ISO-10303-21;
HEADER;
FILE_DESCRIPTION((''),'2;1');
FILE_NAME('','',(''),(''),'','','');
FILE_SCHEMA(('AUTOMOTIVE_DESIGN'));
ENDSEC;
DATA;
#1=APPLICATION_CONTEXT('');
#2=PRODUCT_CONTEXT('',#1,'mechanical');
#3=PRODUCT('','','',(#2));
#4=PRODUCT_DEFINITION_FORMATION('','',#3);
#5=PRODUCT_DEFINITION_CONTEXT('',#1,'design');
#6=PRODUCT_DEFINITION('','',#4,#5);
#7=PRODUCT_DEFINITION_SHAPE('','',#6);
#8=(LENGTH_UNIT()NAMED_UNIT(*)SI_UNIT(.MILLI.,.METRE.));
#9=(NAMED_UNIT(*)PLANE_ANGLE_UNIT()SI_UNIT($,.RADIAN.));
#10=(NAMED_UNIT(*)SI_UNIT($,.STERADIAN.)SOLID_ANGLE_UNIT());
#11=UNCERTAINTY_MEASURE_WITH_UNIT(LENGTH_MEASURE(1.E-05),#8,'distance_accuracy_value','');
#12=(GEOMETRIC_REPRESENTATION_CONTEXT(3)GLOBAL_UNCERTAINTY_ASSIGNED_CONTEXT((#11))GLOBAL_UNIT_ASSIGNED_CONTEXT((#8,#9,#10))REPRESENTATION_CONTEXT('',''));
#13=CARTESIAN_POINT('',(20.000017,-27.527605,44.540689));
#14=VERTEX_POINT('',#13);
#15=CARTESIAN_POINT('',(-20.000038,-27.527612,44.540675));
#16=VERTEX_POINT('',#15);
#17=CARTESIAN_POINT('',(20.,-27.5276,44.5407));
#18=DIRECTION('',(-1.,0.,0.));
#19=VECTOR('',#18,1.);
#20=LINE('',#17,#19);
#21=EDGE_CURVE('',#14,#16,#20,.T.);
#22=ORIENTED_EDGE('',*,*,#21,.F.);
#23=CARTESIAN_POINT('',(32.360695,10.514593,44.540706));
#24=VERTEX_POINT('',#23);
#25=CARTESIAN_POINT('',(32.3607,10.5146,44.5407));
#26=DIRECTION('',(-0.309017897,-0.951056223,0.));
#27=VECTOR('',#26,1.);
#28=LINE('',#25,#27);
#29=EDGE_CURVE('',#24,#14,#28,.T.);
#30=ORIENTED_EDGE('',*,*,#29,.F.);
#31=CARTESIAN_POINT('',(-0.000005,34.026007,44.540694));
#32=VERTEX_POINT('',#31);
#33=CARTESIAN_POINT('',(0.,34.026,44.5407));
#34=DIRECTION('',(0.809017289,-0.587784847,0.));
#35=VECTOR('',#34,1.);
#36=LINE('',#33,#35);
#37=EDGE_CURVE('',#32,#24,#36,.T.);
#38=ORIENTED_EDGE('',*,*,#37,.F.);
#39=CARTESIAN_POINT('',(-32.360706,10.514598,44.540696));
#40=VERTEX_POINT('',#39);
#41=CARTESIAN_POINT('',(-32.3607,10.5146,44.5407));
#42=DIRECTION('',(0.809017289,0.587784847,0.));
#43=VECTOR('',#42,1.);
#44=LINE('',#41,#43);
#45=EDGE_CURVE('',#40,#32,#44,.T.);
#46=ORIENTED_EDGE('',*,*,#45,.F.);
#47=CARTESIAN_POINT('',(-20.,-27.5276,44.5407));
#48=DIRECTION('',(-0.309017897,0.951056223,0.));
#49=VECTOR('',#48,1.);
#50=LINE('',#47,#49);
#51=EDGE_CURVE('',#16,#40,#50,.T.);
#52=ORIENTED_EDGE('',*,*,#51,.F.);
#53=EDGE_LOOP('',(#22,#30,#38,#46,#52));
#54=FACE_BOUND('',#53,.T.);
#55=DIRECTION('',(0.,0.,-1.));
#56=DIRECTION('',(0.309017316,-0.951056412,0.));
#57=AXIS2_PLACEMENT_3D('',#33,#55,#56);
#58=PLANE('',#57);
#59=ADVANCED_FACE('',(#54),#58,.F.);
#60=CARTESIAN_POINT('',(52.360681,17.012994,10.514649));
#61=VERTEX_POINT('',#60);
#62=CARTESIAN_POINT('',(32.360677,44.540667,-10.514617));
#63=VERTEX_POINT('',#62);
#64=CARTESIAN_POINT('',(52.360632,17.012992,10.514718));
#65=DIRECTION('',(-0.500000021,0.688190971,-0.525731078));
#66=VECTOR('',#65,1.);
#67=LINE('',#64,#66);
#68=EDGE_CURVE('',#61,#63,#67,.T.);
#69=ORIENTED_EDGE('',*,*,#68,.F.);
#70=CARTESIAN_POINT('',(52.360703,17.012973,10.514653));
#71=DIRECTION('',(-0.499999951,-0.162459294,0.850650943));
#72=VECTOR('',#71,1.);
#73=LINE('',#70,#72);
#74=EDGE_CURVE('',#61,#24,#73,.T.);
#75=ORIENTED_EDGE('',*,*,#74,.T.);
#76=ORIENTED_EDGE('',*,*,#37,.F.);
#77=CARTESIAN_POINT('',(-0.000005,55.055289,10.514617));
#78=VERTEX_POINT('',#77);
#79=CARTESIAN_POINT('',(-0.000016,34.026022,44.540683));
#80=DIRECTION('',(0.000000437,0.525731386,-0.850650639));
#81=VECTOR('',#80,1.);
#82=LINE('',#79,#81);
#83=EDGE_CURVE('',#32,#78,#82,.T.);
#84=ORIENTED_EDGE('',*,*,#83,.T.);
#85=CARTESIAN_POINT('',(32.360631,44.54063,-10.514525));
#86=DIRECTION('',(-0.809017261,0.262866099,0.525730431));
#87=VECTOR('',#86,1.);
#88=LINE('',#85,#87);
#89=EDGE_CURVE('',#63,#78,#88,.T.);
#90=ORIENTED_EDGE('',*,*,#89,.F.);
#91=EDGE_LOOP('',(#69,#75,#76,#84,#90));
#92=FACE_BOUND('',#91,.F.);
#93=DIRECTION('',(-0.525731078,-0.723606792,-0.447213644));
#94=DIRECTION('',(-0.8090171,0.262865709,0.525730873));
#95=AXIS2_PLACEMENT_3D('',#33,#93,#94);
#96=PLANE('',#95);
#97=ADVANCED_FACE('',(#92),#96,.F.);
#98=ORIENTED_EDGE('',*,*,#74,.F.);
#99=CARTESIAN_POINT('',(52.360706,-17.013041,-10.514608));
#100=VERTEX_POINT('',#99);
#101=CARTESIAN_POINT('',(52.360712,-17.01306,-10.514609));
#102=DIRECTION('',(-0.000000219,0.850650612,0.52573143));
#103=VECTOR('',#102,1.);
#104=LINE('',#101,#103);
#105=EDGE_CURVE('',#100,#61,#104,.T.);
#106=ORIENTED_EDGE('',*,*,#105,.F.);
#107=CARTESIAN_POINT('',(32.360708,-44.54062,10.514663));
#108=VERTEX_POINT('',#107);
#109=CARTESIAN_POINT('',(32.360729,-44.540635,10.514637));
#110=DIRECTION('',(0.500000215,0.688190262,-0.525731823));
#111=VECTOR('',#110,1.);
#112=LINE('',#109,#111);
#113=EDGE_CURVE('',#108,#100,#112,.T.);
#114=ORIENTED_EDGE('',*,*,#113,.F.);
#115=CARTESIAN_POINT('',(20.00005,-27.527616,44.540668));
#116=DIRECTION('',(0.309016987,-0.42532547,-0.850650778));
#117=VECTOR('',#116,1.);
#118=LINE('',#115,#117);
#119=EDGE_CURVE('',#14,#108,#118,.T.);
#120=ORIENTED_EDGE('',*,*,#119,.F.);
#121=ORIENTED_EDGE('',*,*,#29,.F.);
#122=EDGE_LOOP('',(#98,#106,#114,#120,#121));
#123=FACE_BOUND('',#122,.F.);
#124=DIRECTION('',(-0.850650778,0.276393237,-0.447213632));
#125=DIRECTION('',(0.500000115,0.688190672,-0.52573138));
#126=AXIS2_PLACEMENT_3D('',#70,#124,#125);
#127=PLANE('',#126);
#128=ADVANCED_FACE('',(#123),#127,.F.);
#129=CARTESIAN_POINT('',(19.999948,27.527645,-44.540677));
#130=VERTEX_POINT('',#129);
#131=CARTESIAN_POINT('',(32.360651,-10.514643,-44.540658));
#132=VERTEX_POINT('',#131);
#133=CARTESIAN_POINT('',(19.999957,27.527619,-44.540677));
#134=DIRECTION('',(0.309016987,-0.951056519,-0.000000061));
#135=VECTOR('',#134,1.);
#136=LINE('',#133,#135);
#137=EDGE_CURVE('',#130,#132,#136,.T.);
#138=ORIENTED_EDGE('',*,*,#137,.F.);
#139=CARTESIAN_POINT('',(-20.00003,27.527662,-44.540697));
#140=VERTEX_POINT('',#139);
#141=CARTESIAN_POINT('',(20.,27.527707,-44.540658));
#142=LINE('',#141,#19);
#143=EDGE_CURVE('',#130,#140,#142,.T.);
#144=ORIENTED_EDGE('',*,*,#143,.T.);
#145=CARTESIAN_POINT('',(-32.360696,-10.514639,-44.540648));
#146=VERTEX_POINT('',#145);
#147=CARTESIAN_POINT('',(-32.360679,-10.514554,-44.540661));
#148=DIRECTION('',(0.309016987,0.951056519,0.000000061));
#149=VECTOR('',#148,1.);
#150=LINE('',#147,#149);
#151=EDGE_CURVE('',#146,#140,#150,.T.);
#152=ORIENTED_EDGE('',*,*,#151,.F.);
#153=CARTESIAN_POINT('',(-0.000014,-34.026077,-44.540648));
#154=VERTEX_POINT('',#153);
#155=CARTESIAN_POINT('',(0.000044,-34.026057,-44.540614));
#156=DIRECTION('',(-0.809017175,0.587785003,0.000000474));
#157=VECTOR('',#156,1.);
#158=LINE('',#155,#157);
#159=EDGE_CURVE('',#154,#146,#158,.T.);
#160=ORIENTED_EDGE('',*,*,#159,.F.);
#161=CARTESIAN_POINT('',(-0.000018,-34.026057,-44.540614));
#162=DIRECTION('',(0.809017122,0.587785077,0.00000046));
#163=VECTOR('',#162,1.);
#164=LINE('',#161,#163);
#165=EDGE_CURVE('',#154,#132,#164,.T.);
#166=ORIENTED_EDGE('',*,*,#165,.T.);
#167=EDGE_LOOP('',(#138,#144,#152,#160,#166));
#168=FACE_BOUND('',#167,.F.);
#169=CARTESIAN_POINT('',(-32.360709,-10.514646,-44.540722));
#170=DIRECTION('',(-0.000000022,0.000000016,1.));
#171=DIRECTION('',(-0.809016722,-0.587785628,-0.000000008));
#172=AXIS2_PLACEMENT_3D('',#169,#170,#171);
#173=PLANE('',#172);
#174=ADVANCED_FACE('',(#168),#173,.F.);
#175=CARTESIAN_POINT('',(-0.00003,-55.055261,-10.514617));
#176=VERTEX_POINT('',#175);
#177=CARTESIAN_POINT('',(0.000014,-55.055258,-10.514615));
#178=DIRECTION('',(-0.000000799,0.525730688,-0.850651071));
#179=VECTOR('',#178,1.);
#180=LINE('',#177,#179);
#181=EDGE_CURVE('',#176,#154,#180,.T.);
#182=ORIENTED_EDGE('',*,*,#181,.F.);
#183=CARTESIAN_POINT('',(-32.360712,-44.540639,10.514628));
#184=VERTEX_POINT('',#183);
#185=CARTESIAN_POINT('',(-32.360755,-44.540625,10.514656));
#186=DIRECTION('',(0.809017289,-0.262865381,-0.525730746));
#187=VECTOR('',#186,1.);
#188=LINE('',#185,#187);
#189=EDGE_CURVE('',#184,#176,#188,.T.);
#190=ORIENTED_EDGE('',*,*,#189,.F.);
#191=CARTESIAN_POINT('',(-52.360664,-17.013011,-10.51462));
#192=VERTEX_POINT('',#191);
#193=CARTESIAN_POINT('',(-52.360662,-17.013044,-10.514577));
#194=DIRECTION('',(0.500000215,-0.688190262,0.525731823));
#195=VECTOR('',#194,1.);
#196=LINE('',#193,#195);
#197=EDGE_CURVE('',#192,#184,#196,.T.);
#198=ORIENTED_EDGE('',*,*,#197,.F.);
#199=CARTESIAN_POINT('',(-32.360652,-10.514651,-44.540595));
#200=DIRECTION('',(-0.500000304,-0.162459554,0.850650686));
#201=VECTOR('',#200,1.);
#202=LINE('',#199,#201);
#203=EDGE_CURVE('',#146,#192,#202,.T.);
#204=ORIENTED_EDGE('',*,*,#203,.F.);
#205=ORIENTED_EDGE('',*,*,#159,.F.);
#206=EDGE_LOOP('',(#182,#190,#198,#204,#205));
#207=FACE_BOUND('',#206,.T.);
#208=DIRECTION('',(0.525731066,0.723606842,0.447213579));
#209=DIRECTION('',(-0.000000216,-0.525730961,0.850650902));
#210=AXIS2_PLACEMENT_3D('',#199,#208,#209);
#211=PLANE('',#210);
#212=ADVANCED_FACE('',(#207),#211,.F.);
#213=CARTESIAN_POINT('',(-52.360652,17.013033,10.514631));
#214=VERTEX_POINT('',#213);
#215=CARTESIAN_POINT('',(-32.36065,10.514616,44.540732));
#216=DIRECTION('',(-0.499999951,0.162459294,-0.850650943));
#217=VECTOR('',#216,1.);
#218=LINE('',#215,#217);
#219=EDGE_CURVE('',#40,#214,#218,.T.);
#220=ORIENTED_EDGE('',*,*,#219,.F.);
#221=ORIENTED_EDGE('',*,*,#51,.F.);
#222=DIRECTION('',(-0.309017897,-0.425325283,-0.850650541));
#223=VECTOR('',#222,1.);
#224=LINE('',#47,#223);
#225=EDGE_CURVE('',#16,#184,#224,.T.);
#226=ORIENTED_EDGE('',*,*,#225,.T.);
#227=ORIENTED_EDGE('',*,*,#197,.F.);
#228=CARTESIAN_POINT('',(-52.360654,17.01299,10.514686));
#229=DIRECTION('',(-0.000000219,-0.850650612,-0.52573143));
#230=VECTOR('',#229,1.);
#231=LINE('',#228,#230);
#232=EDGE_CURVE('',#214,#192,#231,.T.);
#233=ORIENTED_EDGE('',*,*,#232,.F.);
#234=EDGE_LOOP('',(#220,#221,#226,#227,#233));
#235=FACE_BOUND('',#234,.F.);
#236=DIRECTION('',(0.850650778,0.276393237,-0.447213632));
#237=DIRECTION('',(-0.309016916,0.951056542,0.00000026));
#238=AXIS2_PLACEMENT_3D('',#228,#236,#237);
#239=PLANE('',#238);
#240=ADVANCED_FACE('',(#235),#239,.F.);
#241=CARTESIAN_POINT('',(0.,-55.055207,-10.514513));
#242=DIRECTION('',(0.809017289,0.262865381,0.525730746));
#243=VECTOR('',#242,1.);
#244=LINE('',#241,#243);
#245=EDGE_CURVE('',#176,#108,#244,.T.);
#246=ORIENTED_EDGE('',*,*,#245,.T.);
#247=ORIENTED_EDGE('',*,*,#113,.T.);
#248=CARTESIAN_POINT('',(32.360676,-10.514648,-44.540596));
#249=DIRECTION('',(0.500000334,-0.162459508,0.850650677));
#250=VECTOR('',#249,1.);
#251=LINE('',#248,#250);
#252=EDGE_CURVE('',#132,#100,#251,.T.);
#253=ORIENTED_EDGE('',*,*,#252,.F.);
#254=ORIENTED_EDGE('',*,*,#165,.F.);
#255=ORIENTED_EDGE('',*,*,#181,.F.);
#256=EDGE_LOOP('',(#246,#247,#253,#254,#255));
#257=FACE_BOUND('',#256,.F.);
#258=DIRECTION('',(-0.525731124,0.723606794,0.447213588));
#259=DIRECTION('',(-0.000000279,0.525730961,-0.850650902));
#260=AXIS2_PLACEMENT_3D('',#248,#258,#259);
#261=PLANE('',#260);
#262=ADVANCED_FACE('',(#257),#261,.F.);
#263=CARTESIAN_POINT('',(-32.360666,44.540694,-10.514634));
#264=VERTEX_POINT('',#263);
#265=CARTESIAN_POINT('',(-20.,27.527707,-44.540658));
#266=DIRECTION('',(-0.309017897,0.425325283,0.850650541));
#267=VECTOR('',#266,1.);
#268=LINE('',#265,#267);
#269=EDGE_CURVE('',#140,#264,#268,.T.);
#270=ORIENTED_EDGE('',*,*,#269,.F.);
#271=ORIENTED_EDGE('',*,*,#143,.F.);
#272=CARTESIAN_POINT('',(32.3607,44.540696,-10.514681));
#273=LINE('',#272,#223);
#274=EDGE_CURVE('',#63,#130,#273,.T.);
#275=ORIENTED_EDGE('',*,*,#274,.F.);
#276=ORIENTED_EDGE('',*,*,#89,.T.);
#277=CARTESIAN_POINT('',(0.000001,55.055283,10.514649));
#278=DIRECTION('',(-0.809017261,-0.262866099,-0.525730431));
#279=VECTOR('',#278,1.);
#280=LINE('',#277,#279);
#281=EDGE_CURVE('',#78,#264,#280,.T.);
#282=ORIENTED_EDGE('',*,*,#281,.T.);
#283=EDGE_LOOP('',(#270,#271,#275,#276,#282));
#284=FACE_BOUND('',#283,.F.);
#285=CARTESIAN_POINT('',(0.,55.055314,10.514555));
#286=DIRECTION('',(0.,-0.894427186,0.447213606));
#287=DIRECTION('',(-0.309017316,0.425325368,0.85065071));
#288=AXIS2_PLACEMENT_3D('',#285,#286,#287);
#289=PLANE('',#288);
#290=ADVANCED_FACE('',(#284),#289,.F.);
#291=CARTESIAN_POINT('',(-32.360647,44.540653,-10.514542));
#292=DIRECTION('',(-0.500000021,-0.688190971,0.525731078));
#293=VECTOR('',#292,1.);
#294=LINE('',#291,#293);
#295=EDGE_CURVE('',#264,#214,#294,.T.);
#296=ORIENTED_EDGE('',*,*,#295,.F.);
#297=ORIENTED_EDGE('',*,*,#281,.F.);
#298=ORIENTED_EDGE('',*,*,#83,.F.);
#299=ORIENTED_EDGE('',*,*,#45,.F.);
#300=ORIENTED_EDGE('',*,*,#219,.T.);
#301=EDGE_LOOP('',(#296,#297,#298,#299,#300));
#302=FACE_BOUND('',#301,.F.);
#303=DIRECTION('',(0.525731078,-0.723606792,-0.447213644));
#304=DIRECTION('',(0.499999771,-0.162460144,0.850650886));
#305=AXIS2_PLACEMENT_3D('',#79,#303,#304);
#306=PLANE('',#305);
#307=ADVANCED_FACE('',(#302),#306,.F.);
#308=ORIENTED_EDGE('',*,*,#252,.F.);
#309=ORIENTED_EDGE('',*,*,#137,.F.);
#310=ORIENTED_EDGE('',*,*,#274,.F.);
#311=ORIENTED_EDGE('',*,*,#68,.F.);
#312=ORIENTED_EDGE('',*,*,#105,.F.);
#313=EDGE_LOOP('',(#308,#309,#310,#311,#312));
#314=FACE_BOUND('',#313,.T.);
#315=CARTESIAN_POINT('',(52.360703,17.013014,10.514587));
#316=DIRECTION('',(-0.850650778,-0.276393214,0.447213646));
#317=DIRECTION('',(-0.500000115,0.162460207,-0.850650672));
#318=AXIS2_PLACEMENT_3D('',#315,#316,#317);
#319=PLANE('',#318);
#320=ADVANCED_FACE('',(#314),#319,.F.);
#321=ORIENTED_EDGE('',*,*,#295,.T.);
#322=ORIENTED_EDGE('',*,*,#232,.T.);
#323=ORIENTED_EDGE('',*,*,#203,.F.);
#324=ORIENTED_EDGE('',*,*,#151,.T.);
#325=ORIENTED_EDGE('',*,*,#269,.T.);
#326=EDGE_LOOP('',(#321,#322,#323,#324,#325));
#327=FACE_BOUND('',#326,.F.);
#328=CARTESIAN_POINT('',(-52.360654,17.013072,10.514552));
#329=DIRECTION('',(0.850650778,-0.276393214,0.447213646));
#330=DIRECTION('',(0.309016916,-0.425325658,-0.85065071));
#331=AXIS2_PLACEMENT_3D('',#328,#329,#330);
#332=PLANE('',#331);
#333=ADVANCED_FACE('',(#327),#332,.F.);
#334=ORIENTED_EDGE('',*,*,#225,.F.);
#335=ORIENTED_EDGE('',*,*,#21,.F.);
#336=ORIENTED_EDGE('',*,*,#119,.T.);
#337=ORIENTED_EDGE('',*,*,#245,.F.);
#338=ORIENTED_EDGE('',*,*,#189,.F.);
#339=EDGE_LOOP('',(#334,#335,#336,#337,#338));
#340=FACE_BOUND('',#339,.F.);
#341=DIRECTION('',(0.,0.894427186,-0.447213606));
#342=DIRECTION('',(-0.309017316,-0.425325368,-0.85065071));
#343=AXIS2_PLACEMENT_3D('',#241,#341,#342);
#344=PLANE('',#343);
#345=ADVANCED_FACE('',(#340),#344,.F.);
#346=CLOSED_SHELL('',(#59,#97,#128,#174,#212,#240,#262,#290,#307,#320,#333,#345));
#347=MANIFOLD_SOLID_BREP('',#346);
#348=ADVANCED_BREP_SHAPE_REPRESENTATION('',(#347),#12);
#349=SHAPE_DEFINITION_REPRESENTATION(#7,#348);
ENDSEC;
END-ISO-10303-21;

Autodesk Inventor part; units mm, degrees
ref_plane "YZ Plane" through (0, 0, 0) normal (1, 0, 0) x (0, 1, 0)
ref_plane "XZ Plane" through (0, 0, 0) normal (0, 1, 0) x (-1, 0, 0)
ref_plane "Work Plane1" through (0, 0, 44.5407) normal (0, 0, 1) x (1, 0, 0)
sketch "Sketch2" plane through (0, 0, 44.5407) normal (0, 0, 1) x (1, 0, 0)
  line L0 (0, 34.026) -> (32.3607, 10.5146)
  line L1 (32.3607, 10.5146) -> (20, -27.5276)
  line L2 (20, -27.5276) -> (-20, -27.5276)
  line L3 (-20, -27.5276) -> (-32.3607, 10.5146)
  line L4 (-32.3607, 10.5146) -> (0, 34.026)
  point P0 (0, 0)
  point P1 (0, 0)
  dimension "d2" = 40
loft "Loft1" add profiles "Sketch2" section 2 point at (0, 0, 0)
mirror "Mirror1" about plane through (32.3607, 10.5146, 44.5407) normal (0.809017, -0.2628656, -0.5257311) of "Loft1"
mirror "Mirror2" about plane through (20, -27.5276, 44.5407) normal (0, -0.8506508, -0.5257311) of "Loft1"
mirror "Mirror3" about plane through (-20, -27.5276, 44.5407) normal (-0.809017, -0.2628656, -0.5257311) of "Loft1"
mirror "Mirror4" about plane through (-32.3607, 10.5146, 44.5407) normal (-0.5, 0.688191, -0.5257311) of "Loft1"
mirror "Mirror5" about plane through (0, 34.026, 44.5407) normal (0.5, 0.688191, -0.5257311) of "Loft1"
mirror "Mirror6" about plane through (-52.3607, -17.013, -10.5146) normal (0.309017, -0.4253254, -0.8506508) of "Loft1", "Mirror3"
mirror "Mirror7" about plane through (-52.3607, 17.013, 10.5146) normal (0, 0.5257311, -0.8506508) of "Loft1", "Mirror3"
mirror "Mirror8" about plane through (52.3607, -17.013, -10.5146) normal (0, 0.5257311, -0.8506508) of "Loft1", "Mirror1"
mirror "Mirror9" about plane through (20, 27.5276, -44.5407) normal (-0.809017, -0.2628656, -0.5257311) of "Loft1", "Mirror1", "Mirror8"
properties part number "dodecahedron"
